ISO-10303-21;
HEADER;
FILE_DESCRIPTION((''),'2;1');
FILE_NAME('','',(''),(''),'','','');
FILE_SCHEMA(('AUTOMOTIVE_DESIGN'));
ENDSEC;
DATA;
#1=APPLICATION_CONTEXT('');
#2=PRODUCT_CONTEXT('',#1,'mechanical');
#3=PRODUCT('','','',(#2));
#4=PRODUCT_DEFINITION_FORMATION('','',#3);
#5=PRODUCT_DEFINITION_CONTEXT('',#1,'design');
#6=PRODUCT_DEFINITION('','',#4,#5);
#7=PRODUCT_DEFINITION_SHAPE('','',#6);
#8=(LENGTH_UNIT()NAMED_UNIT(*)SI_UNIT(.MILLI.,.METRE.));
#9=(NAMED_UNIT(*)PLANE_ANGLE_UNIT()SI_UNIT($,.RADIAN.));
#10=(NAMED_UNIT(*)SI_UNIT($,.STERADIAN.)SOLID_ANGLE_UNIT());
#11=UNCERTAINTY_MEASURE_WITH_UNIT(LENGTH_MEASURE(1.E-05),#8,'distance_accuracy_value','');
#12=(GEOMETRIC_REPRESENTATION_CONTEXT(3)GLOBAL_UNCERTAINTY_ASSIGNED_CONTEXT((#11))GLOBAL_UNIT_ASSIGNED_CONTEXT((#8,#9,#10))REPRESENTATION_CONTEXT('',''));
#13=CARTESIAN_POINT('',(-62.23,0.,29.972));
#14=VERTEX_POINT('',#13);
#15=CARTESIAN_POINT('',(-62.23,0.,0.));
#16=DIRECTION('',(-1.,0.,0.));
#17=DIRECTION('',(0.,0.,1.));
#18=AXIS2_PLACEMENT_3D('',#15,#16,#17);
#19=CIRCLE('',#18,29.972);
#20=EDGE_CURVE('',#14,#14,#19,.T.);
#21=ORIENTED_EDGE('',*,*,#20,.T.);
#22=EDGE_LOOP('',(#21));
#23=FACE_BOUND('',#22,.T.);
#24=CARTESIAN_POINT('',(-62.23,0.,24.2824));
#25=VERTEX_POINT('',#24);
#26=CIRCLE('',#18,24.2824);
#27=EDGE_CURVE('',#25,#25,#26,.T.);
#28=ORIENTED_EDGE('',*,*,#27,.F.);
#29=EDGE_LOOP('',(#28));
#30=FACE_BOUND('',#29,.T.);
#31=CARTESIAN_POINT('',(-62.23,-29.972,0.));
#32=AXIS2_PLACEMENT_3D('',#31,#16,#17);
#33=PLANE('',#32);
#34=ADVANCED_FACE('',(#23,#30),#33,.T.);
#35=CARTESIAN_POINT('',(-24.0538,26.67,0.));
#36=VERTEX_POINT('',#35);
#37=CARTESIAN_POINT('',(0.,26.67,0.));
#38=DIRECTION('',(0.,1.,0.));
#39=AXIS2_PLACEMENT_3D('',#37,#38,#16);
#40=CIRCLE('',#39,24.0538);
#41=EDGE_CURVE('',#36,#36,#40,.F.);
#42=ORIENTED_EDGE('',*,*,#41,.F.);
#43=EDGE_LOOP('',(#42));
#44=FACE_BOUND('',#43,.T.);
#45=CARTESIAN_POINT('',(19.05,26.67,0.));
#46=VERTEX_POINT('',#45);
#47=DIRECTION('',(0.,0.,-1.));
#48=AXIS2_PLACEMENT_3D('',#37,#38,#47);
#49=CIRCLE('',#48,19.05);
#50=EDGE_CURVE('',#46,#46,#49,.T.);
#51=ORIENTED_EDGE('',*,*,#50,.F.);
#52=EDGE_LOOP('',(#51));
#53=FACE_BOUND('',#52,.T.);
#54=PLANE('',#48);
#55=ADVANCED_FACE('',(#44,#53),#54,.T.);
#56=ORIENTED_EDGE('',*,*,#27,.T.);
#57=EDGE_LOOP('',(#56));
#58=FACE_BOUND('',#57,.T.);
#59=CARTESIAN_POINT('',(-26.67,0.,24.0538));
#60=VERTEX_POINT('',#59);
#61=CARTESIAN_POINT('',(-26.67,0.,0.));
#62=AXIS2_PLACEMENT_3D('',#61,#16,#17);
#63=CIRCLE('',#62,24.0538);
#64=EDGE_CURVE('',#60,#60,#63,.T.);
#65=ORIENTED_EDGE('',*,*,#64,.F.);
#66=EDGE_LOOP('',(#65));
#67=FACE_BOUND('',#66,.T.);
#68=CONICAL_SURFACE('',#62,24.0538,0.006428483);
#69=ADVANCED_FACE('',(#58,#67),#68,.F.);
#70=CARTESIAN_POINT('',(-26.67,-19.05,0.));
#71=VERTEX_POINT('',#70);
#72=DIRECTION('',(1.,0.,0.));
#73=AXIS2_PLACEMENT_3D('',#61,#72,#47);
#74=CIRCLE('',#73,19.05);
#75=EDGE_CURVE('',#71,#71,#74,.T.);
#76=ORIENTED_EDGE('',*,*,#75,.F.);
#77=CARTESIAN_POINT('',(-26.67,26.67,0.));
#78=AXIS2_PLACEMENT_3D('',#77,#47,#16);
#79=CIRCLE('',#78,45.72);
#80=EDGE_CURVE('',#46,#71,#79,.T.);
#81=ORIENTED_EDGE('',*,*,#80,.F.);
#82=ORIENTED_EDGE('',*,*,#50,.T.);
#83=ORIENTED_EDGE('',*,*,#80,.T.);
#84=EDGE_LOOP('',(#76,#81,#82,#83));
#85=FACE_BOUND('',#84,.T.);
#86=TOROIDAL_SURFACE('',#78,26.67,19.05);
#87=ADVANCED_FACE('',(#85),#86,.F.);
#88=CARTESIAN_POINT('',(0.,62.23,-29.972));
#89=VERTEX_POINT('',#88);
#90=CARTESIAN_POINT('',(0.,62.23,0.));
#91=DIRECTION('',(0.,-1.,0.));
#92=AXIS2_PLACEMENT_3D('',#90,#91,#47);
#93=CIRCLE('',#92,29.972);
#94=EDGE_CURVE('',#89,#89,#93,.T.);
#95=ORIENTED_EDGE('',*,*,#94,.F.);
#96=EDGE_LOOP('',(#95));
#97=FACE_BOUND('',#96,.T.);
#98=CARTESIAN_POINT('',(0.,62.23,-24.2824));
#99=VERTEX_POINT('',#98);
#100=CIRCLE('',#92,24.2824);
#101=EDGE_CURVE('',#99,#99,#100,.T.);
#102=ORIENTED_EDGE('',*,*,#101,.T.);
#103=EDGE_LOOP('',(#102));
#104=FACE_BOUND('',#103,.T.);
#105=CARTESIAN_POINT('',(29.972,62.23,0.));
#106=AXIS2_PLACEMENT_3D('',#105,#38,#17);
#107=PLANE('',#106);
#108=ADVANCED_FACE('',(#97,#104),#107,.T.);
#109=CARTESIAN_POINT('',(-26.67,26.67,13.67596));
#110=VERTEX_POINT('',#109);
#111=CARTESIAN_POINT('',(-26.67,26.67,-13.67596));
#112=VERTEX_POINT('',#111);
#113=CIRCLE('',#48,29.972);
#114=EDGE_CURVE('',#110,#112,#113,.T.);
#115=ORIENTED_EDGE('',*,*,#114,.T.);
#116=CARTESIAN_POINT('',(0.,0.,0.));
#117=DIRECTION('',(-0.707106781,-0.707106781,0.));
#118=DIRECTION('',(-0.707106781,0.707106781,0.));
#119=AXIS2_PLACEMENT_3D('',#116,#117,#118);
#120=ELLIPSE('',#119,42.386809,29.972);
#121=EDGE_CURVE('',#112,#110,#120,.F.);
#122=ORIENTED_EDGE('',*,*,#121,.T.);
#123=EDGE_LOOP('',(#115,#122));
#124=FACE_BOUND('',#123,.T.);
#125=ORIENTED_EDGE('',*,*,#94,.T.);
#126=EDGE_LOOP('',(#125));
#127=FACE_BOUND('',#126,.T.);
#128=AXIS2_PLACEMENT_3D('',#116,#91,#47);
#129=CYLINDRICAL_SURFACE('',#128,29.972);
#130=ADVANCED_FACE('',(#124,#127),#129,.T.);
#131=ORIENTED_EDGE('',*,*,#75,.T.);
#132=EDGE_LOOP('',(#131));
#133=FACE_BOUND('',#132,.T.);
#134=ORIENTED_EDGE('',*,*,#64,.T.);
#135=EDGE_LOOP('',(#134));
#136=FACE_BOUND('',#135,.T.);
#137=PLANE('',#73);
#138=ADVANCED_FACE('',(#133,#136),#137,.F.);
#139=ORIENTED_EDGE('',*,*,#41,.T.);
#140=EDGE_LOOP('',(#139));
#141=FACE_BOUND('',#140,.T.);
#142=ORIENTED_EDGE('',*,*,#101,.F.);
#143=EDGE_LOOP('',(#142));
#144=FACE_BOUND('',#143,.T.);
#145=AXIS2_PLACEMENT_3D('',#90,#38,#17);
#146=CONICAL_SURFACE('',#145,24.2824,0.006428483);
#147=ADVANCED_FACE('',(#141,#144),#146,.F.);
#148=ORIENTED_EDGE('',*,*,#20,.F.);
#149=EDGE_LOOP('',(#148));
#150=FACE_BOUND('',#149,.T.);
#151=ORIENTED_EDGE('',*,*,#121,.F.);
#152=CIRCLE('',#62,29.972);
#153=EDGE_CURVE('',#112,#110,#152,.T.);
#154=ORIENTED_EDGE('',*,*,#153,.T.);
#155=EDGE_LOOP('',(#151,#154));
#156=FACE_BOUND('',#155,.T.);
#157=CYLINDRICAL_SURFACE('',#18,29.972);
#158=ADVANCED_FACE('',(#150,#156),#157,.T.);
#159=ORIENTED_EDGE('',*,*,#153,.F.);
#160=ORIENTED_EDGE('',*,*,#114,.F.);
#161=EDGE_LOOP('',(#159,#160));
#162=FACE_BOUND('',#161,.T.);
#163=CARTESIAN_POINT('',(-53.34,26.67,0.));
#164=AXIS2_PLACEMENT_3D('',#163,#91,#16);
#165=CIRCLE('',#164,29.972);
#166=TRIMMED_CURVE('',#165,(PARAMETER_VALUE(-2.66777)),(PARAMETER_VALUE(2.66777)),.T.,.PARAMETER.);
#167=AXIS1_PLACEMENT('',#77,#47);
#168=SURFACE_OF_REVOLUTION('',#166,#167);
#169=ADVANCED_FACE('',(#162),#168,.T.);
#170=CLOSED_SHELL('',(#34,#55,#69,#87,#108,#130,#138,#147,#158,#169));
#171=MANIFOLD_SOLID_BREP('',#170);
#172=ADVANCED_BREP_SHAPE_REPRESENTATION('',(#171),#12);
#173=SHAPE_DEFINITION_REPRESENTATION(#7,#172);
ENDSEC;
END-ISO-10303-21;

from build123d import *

# Parameters (mm, degrees)
SKETCH3_R   = 29.972
SKETCH3_R_2 = 19.05


with BuildPart() as part:
    # Sketch1 → Revolve1 (revolve)
    with BuildSketch(Plane.XY):
        Polygon((-62.23, -29.972), (-26.67, -29.972), (-26.67, -24.0538), (-62.23, -24.2824), align=None)
    revolve(axis=Axis((-62.23, 0, 0), (1, 0, 0)))


with BuildPart() as body_2:
    # Sketch2 → Revolve2 (revolve)
    with BuildSketch(Plane.XY):
        Polygon((24.2824, 62.23), (24.0538, 26.67), (29.972, 26.67), (29.972, 62.23), align=None)
    revolve(axis=Axis((0, 0, 0), (0, 1, 0)))


with BuildPart() as sweep1_tool:
    # Sweep1: sweep along a path in Sketch4
    with BuildLine(Plane.XY) as sweep1_path:
        ThreePointArc((-26.67, 0), (-7.811462, 7.811462), (0, 26.67))
    # Sketch3 → Sweep1 (sweep)
    with BuildSketch(Plane(origin=(-26.67, 0, 0), x_dir=(0, 0, -1), z_dir=(1, 0, 0))):
        Circle(SKETCH3_R)
        Circle(SKETCH3_R_2, mode=Mode.SUBTRACT)
    sweep(path=sweep1_path.line)


with BuildPart() as part_1:
    add(part.part)


with BuildPart() as part_2:
    # Sweep1: joined with sweep1_tool
    add(part_1.part.fuse(sweep1_tool.part, body_2.part, tol=0.00001))


solid = part_2.part
